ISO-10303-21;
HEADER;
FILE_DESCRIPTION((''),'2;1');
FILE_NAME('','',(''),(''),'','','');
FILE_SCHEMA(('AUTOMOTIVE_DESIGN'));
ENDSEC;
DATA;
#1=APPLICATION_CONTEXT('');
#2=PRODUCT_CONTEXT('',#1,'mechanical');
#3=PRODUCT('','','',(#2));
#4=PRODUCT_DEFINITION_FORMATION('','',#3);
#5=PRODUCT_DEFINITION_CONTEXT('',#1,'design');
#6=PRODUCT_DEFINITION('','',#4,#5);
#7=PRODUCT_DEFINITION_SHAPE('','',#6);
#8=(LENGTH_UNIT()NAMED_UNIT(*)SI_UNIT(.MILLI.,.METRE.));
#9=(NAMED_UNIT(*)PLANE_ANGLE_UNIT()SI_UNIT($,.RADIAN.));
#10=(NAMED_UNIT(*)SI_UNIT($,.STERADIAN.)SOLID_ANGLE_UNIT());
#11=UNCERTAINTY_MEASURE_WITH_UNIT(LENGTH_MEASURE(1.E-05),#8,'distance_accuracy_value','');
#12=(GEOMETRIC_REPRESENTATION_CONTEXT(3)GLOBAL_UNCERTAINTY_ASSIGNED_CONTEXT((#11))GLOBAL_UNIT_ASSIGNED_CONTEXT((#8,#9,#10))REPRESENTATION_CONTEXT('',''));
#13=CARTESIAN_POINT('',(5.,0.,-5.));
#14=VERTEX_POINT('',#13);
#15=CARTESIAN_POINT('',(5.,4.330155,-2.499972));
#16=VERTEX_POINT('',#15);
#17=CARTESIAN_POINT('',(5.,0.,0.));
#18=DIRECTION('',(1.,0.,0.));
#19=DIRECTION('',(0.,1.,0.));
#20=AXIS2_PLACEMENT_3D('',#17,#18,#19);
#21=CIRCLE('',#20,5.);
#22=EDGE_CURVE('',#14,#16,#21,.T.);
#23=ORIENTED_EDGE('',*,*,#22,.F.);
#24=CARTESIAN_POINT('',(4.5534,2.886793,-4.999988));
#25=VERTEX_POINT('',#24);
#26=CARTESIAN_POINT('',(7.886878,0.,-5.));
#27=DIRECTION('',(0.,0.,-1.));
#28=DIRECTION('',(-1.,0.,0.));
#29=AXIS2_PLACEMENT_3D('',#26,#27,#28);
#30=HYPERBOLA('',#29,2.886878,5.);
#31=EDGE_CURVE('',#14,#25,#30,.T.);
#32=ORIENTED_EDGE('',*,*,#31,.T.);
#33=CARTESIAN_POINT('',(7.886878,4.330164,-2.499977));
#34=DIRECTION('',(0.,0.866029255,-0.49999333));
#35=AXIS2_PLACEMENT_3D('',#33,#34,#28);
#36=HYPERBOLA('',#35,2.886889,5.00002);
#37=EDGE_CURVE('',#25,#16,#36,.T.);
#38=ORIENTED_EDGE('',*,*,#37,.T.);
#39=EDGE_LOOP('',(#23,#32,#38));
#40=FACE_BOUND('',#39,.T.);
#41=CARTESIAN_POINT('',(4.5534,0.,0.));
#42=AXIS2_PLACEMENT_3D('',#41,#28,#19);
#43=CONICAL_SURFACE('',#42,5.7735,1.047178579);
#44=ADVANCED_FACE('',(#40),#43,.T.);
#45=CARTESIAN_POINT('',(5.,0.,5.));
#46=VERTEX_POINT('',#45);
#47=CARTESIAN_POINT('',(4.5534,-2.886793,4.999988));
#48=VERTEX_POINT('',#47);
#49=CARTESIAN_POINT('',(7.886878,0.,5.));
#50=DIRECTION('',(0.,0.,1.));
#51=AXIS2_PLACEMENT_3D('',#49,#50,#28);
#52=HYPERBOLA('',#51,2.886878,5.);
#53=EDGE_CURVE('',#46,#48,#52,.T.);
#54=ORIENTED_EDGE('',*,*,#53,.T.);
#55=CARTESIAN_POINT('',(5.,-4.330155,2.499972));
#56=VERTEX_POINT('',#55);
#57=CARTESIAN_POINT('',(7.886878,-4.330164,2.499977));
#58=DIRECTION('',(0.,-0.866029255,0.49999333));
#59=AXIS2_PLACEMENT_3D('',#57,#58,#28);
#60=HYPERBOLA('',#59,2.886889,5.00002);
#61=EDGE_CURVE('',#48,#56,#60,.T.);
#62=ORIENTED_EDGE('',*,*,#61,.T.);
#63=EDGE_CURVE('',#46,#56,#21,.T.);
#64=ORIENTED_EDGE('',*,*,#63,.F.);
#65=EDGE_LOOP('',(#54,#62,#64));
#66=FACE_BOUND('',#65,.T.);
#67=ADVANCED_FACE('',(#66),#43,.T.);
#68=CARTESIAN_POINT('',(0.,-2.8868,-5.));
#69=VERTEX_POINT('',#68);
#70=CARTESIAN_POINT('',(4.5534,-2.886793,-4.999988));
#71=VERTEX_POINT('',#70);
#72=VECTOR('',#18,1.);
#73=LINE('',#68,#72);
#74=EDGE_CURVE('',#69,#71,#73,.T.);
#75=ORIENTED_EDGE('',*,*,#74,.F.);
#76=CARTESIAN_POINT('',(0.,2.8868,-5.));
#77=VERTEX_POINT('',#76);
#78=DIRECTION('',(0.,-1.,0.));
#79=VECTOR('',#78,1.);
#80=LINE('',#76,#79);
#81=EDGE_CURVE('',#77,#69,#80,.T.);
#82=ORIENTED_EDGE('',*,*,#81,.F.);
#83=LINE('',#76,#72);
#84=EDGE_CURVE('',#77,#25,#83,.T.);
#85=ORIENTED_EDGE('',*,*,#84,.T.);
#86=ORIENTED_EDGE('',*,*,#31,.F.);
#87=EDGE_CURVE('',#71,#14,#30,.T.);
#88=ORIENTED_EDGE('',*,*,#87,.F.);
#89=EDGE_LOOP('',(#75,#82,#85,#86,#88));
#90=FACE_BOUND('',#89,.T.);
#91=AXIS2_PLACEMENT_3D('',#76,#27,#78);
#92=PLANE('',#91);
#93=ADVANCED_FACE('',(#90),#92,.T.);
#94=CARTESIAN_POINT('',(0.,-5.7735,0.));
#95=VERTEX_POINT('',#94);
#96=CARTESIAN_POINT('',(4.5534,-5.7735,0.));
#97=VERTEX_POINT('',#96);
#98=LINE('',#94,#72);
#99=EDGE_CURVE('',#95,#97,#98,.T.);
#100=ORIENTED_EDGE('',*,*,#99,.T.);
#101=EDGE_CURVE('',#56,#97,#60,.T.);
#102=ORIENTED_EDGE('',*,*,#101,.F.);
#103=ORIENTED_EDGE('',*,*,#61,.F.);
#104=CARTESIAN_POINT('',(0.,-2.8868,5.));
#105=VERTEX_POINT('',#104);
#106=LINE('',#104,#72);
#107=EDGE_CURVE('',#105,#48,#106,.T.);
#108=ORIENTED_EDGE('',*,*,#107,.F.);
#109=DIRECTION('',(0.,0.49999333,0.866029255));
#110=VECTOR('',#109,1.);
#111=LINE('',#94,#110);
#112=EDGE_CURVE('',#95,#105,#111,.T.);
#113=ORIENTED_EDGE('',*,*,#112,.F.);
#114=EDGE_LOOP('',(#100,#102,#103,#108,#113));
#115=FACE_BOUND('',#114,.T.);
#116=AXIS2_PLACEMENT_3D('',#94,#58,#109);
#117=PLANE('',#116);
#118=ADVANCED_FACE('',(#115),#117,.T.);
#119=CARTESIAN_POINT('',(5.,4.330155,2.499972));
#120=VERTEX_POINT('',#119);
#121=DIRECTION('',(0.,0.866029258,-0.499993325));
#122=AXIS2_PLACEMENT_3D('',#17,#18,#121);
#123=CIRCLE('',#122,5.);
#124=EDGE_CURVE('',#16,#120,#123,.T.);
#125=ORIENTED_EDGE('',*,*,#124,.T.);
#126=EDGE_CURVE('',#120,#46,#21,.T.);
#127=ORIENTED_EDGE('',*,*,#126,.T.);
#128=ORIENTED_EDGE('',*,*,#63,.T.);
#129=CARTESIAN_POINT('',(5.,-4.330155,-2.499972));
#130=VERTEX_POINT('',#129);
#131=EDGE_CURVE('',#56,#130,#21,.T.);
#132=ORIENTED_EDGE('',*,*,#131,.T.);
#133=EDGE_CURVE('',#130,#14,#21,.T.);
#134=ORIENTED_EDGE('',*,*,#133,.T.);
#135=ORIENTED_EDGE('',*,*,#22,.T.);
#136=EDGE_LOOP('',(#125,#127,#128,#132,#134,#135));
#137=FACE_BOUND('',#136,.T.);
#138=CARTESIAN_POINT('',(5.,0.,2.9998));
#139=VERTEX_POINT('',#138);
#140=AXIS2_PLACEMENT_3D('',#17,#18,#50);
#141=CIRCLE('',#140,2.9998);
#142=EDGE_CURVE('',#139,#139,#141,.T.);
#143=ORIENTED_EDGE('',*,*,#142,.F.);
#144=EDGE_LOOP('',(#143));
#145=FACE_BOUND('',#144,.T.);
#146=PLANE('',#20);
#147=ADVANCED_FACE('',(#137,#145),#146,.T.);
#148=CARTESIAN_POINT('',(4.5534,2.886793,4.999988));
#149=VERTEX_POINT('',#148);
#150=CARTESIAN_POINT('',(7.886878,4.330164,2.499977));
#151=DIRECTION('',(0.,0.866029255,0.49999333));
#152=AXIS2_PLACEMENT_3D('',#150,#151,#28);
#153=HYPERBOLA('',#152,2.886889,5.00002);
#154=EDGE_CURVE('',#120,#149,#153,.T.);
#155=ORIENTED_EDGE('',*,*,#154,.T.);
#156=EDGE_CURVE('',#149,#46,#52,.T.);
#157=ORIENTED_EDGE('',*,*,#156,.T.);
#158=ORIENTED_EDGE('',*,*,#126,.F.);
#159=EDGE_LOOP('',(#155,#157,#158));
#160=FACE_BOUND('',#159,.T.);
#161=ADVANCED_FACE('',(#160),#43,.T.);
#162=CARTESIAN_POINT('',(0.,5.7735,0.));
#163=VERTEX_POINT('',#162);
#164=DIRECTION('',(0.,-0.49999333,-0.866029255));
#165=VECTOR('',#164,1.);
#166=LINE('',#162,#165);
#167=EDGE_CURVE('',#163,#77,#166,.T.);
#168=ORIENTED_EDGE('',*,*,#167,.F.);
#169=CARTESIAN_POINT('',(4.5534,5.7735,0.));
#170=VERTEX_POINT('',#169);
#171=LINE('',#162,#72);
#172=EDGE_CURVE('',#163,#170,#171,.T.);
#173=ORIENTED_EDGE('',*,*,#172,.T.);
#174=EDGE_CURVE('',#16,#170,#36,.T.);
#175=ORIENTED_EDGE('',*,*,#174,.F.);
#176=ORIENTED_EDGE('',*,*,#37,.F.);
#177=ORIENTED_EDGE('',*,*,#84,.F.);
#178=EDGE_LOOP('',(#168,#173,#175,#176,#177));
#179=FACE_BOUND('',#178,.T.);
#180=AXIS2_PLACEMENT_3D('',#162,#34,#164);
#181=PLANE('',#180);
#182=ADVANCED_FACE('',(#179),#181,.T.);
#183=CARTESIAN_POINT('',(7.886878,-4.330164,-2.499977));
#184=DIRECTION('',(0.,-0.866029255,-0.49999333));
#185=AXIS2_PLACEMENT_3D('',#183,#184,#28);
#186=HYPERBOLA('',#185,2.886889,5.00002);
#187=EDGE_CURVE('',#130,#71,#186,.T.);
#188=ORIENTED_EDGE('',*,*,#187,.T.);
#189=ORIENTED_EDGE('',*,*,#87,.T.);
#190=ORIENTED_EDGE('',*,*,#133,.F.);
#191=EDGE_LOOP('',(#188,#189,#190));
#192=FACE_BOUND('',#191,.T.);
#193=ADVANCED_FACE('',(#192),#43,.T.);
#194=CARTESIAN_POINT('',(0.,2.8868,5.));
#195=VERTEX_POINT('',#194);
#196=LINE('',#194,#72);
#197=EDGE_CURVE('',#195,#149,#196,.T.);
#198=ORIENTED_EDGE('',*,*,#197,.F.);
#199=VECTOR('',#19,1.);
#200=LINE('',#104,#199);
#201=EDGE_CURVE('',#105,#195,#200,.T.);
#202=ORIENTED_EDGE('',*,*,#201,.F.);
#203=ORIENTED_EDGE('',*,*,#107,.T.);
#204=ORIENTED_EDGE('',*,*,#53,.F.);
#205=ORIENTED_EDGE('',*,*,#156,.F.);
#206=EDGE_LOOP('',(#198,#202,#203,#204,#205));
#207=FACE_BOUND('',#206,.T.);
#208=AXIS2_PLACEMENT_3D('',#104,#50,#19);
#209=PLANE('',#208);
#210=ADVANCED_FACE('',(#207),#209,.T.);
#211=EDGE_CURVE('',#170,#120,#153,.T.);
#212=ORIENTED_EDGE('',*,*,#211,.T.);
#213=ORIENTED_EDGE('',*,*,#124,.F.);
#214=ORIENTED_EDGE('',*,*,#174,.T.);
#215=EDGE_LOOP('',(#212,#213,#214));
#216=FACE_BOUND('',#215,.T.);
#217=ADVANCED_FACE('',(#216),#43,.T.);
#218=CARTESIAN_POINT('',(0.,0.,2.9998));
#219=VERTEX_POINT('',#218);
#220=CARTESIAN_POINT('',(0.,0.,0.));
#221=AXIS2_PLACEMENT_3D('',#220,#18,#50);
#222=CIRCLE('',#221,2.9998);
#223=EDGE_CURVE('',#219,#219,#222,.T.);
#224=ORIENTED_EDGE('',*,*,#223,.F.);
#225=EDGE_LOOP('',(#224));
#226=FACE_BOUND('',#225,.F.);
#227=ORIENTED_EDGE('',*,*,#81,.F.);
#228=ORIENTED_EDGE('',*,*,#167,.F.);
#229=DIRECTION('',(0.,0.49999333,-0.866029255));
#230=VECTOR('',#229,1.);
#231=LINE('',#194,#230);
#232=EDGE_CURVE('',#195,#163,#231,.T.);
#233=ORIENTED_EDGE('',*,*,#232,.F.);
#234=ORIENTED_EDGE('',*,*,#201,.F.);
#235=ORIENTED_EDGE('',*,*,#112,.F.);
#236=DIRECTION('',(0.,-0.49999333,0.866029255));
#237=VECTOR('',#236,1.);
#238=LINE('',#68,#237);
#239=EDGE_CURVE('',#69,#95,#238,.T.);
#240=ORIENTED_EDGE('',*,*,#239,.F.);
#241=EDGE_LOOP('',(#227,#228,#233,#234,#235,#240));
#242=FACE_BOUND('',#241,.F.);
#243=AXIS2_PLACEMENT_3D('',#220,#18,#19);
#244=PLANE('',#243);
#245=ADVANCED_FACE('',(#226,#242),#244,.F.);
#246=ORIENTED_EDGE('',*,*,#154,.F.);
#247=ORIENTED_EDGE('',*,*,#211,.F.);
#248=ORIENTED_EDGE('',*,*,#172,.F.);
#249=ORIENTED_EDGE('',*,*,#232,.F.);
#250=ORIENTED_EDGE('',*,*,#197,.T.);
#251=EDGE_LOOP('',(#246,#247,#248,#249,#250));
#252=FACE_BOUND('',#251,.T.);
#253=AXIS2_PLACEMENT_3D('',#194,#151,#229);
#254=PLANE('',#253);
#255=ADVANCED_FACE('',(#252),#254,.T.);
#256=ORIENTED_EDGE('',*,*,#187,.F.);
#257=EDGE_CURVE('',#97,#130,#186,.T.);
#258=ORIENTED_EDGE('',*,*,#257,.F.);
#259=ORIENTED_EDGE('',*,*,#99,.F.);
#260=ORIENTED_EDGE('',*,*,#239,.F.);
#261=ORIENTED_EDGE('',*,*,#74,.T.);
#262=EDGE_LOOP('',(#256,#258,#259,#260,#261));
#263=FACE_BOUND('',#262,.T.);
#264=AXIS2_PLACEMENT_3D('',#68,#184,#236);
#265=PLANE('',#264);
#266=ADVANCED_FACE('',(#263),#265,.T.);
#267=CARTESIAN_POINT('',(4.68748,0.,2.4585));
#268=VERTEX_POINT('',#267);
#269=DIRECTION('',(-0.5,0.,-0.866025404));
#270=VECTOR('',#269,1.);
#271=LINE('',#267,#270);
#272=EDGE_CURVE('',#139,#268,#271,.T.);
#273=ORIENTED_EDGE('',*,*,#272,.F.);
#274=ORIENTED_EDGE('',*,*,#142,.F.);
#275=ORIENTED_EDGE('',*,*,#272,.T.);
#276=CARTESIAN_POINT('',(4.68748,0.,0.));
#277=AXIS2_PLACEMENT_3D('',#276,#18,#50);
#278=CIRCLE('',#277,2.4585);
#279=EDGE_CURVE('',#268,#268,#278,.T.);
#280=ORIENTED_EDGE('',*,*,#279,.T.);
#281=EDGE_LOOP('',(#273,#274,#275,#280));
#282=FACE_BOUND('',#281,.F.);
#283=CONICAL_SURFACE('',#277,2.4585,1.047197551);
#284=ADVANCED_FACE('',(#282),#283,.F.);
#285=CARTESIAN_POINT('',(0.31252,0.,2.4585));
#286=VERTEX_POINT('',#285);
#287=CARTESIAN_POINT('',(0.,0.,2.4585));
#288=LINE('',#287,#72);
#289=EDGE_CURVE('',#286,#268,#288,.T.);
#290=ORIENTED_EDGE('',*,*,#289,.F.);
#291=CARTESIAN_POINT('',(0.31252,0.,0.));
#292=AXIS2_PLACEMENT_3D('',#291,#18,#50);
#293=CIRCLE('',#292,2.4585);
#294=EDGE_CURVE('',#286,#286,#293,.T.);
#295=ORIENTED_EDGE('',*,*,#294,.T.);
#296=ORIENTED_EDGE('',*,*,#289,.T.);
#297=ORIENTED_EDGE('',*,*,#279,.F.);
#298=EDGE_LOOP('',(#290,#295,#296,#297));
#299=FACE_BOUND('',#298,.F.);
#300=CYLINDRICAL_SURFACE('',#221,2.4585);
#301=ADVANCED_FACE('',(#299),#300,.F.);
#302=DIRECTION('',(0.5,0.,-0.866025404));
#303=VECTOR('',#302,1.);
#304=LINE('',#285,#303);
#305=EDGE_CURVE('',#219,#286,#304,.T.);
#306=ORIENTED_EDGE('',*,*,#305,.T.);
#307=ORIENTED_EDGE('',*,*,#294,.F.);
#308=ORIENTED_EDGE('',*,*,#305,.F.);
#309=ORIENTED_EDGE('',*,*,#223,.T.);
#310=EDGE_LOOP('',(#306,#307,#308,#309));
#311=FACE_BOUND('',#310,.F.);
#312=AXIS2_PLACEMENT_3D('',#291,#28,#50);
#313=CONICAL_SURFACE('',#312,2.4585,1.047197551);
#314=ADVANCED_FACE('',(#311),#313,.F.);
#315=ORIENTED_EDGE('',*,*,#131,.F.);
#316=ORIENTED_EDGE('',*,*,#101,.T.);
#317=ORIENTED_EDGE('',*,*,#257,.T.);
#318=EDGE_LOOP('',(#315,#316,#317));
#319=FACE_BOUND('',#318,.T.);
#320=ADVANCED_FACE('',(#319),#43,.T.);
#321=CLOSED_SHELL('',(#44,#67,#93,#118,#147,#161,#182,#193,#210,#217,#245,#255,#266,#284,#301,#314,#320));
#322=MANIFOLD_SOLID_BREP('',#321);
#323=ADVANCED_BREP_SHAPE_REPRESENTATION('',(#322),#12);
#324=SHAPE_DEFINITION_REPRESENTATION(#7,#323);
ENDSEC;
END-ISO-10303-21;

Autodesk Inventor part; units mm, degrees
ref_plane "YZ Plane" through (0, 0, 0) normal (1, 0, 0) x (0, 1, 0)
ref_plane "XZ Plane" through (0, 0, 0) normal (0, 1, 0) x (-1, 0, 0)
sketch "Sketch1" plane through (0, 0, 0) normal (1, 0, 0) x (0, 1, 0)
  line L0 (5.7735, 0) -> (2.8868, -5)
  line L1 (2.8868, -5) -> (-2.8868, -5)
  line L2 (-2.8868, -5) -> (-5.7735, 0)
  line L3 (-5.7735, 0) -> (-2.8868, 5)
  line L4 (-2.8868, 5) -> (2.8868, 5)
  line L5 (2.8868, 5) -> (5.7735, 0)
  point P0 (0, 0)
  point P1 (0, 0)
  dimension "d0" = 11.547
extrude "Body" add sketch "Sketch1" along normal blind 5
sketch "Sketch2" plane through (0, 0, 0) normal (-1, 0, 0) x (0, 0, 1)
  point P0 (0, 0)
hole "Thread" at (0, 0, 0) direction (1, 0, 0) diameter 4.917 end through all thread size "M6x1" class "6H" standard "ISO Metric profile"
chamfer "Chamfer1" distance 0.5413 angle 30 1 edges at (0, 0, -2.4585) measured on face at (0, -3.5612, 2.1322)
chamfer "Chamfer2" distance 0.5413 angle 30 1 edges at (5, 0, -2.4585) measured on face at (5, -3.5612, 2.1322)
sketch "Sketch3" plane through (0, 0, 0) normal (0, 0, 1) x (1, 0, 0)
  line L0 (0, 5.7735) -> (5, 5.7735) projected
  line L1 (5, 2.8868) -> (5, 5.7735) projected
  line L2 (-1, 0) -> (6, 0) projected
  line L3 (4.5534, 5.7735) -> (5, 5)
  dimension "d3" = 10
  dimension "d4" = 30
revolve "Chamfer3" cut sketch "Sketch3" angle 360 about axis through (-10, 0, 0) along (1, 0, 0)
ref_plane "Work Plane1" through (16.0728, 0, 0) normal (0, 0.8660254, -0.5) x (-1, 0, 0)
equation "\"d0\" = 1.1547 * SW"
equation "\"d1\" = KOH"
equation "\"d13\" = -0.5 * GD1 + 0.5 * NND"
equation "\"d21\" = -0.5 * GD1 + 0.5 * NND"
equation "\"d15\" = -0.5 * GD1 + 0.5 * NND"
equation "\"d22\" = -0.5 * GD1 + 0.5 * NND"
equation "\"d3\" = SW01"
equation "\"d4\" = ANG2"
equation "\"ANG2\" = 30deg"
equation "\"NND\" = 6"
equation "\"KOH\" = 5"
equation "\"SW01\" = SW"
equation "\"GUL\" = 0.541266 * PTC"
equation "\"TOA\" = 30deg"
equation "\"PTC\" = 1"
equation "\"E0\" = 1.155 * SW"
equation "\"THREADDIA\" = 6"
equation "\"GAL\" = 0.541266 * PTC"
equation "\"SW\" = 10"
equation "\"GD1\" = 4.917468"
properties part number "JIS B 1181 - HN - class 1 - Finished - M6" material "Steel, Mild"
